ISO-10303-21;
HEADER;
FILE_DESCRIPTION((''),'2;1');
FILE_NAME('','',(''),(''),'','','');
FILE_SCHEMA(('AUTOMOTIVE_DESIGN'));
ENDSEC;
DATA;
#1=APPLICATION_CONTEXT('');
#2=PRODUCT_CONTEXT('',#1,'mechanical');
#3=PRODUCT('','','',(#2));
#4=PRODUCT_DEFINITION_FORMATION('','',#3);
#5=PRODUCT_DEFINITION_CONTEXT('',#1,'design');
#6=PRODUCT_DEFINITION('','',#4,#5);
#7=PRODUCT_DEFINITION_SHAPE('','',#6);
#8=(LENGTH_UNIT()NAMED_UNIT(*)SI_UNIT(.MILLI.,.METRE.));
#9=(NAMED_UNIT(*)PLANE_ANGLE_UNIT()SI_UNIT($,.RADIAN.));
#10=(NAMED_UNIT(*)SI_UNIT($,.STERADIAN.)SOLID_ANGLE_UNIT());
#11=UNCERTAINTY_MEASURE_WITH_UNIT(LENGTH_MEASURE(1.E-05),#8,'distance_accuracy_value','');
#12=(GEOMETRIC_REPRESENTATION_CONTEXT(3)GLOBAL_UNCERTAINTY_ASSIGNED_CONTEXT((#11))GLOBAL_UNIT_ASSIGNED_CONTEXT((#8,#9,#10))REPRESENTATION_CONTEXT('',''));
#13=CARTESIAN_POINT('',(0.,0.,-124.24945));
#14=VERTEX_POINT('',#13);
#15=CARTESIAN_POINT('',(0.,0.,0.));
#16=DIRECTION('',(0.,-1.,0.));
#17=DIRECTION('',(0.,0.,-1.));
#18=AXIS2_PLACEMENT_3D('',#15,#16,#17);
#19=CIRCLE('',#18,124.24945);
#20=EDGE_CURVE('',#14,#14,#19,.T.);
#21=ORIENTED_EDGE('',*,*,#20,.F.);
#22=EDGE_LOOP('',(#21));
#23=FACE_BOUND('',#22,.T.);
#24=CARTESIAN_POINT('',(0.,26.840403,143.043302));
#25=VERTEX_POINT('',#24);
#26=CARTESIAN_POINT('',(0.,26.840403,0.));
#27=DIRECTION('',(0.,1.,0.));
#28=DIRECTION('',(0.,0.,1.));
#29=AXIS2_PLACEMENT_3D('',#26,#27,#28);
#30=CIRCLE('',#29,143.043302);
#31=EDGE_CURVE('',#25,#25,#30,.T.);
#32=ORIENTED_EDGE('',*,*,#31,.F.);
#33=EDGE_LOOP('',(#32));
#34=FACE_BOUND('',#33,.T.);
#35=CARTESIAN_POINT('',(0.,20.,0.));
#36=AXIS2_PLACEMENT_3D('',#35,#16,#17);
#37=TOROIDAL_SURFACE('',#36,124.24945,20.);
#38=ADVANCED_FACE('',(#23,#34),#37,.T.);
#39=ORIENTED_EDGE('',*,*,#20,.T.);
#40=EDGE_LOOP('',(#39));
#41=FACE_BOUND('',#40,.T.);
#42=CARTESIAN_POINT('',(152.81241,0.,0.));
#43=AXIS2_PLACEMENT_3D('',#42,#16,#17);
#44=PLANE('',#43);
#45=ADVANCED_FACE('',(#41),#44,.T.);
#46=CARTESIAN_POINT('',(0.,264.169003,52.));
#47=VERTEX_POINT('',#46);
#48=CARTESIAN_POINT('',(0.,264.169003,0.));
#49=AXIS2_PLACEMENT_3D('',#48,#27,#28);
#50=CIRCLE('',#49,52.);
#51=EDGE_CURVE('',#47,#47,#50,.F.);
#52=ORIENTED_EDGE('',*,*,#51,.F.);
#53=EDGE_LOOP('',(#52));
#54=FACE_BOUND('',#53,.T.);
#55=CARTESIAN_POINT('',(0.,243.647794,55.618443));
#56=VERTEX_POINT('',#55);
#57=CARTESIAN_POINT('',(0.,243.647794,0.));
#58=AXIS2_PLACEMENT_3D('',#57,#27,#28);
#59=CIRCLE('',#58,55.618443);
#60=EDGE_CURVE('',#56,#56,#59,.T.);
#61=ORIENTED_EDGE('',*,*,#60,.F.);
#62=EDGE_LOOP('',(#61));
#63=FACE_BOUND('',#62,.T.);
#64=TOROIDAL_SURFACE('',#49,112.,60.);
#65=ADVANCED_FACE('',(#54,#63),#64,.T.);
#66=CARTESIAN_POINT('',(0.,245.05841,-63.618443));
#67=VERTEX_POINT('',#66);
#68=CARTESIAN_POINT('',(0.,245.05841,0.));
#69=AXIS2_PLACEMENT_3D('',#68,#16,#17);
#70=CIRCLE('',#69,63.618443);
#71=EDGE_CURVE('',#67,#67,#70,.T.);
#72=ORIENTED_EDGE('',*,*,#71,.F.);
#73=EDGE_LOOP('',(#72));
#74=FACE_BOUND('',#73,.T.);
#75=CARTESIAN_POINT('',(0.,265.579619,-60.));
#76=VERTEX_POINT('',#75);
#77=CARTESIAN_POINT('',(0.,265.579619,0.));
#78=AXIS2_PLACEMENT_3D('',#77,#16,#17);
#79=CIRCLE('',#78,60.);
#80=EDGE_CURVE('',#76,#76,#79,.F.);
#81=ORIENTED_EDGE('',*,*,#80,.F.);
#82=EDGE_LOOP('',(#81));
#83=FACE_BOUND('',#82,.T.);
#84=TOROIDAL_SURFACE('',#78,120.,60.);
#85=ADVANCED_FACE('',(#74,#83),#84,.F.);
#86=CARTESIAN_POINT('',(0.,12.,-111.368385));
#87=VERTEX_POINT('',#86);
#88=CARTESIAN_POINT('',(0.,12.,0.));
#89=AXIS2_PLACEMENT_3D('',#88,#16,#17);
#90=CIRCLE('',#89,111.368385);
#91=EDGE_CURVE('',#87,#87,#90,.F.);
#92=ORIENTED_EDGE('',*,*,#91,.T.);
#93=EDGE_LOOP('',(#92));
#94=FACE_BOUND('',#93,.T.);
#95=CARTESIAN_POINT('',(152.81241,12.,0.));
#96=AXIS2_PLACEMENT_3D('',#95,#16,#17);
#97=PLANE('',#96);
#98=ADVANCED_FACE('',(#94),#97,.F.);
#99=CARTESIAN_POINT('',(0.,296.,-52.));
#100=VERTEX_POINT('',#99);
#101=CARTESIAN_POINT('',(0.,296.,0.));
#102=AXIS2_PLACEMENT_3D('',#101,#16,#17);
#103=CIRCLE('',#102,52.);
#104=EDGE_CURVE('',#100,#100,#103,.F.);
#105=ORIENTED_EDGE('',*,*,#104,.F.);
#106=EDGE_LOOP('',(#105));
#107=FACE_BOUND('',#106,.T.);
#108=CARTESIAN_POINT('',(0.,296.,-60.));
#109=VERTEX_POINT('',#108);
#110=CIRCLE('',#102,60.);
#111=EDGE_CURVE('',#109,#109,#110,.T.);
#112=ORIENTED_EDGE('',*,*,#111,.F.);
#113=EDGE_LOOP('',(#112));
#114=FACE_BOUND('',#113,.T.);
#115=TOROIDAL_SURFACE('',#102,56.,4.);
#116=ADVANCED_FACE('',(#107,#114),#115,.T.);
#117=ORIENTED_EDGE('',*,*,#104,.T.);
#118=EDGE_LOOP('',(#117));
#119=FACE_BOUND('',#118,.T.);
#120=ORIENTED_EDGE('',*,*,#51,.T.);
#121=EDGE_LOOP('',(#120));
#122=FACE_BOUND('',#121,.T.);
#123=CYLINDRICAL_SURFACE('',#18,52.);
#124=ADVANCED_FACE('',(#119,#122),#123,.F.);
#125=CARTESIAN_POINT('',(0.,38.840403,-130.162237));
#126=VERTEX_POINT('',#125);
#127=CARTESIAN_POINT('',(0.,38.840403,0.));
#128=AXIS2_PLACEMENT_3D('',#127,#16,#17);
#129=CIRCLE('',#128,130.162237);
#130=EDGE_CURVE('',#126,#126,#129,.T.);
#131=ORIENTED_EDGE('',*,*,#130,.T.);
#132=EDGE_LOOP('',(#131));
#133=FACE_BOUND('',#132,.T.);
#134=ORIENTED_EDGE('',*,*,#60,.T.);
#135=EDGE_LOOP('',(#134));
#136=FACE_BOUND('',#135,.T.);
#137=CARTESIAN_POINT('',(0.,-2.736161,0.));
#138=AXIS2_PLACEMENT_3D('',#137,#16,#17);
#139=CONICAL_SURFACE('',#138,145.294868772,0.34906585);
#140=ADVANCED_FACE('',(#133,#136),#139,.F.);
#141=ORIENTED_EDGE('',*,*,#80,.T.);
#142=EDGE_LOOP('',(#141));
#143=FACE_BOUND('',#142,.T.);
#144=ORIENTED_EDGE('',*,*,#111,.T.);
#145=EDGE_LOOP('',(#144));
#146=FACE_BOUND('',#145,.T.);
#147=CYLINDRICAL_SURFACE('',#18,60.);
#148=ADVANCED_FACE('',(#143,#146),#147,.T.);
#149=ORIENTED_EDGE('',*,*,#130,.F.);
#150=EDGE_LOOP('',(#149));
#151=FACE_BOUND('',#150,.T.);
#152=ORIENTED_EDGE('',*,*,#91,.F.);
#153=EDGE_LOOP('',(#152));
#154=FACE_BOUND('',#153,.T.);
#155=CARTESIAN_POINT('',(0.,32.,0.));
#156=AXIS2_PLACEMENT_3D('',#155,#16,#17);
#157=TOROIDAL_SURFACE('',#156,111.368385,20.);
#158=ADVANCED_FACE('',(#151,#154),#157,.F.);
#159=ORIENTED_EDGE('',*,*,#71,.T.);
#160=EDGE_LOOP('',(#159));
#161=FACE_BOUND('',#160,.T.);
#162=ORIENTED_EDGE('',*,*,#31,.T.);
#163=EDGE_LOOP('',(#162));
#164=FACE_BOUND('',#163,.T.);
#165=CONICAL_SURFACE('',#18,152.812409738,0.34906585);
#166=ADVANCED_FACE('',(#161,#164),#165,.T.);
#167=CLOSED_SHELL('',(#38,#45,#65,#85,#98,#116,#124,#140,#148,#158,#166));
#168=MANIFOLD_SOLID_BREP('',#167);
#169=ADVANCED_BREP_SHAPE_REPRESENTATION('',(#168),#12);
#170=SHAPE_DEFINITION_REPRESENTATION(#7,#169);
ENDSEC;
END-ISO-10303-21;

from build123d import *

# Parameters (mm, degrees)
SHELL1_T                  = -8
SHELL1_THICKNESS_2_FACE_R = 141.387225684
SHELL1_THICKNESS_2_DEPTH  = 4
FILLET1_R                 = 4
FILLET2_R                 = 60
FILLET3_R                 = 20


with BuildPart() as part:
    # Sketch1 → Revolve2 (revolve)
    with BuildSketch(Plane.XY, mode=Mode.PRIVATE) as revolve2_sk:
        Polygon((0, 0), (0, 300), (60, 300), (60, 255), (152.812409738, 0), align=None)
    revolve(revolve2_sk.sketch.rotate(Axis((0, 0, 0), (0, 1, 0)), 90), axis=Axis((0, 0, 0), (0, 1, 0)))

    # Shell1
    shell1_openings = [part.faces().sort_by_distance(p)[0] for p in [
        (0, 300, 0),
    ]]
    offset(amount=SHELL1_T, openings=shell1_openings, kind=Kind.INTERSECTION)

    # Shell1 thickness 2 face (on inner face of the shell) → Shell1 thickness 2 (add)
    with BuildSketch(Plane(origin=(0, 8, 0), x_dir=(0, 0, -1), z_dir=(0, -1, 0))):
        Circle(SHELL1_THICKNESS_2_FACE_R)
    extrude(amount=-SHELL1_THICKNESS_2_DEPTH)

    # Fillet1
    fillet1_edges = [part.edges().sort_by_distance(p)[0] for p in [
        (0, 300, 52),
        (0, 300, 60),
    ]]
    fillet(fillet1_edges, radius=FILLET1_R - 0.0001)  # a hair under: the kernel refuses the full size

    # Fillet2
    fillet2_edges = [part.edges().sort_by_distance(p)[0] for p in [
        (0, 253.589384154, 52),
        (0, 255, 60),
    ]]
    fillet(fillet2_edges, radius=FILLET2_R)

    # Fillet3
    fillet3_edges = [part.edges().sort_by_distance(p)[0] for p in [
        (0, 12, 139.931344747),
        (0, 0, 152.812409738),
    ]]
    fillet(fillet3_edges, radius=FILLET3_R)


solid = part.part
